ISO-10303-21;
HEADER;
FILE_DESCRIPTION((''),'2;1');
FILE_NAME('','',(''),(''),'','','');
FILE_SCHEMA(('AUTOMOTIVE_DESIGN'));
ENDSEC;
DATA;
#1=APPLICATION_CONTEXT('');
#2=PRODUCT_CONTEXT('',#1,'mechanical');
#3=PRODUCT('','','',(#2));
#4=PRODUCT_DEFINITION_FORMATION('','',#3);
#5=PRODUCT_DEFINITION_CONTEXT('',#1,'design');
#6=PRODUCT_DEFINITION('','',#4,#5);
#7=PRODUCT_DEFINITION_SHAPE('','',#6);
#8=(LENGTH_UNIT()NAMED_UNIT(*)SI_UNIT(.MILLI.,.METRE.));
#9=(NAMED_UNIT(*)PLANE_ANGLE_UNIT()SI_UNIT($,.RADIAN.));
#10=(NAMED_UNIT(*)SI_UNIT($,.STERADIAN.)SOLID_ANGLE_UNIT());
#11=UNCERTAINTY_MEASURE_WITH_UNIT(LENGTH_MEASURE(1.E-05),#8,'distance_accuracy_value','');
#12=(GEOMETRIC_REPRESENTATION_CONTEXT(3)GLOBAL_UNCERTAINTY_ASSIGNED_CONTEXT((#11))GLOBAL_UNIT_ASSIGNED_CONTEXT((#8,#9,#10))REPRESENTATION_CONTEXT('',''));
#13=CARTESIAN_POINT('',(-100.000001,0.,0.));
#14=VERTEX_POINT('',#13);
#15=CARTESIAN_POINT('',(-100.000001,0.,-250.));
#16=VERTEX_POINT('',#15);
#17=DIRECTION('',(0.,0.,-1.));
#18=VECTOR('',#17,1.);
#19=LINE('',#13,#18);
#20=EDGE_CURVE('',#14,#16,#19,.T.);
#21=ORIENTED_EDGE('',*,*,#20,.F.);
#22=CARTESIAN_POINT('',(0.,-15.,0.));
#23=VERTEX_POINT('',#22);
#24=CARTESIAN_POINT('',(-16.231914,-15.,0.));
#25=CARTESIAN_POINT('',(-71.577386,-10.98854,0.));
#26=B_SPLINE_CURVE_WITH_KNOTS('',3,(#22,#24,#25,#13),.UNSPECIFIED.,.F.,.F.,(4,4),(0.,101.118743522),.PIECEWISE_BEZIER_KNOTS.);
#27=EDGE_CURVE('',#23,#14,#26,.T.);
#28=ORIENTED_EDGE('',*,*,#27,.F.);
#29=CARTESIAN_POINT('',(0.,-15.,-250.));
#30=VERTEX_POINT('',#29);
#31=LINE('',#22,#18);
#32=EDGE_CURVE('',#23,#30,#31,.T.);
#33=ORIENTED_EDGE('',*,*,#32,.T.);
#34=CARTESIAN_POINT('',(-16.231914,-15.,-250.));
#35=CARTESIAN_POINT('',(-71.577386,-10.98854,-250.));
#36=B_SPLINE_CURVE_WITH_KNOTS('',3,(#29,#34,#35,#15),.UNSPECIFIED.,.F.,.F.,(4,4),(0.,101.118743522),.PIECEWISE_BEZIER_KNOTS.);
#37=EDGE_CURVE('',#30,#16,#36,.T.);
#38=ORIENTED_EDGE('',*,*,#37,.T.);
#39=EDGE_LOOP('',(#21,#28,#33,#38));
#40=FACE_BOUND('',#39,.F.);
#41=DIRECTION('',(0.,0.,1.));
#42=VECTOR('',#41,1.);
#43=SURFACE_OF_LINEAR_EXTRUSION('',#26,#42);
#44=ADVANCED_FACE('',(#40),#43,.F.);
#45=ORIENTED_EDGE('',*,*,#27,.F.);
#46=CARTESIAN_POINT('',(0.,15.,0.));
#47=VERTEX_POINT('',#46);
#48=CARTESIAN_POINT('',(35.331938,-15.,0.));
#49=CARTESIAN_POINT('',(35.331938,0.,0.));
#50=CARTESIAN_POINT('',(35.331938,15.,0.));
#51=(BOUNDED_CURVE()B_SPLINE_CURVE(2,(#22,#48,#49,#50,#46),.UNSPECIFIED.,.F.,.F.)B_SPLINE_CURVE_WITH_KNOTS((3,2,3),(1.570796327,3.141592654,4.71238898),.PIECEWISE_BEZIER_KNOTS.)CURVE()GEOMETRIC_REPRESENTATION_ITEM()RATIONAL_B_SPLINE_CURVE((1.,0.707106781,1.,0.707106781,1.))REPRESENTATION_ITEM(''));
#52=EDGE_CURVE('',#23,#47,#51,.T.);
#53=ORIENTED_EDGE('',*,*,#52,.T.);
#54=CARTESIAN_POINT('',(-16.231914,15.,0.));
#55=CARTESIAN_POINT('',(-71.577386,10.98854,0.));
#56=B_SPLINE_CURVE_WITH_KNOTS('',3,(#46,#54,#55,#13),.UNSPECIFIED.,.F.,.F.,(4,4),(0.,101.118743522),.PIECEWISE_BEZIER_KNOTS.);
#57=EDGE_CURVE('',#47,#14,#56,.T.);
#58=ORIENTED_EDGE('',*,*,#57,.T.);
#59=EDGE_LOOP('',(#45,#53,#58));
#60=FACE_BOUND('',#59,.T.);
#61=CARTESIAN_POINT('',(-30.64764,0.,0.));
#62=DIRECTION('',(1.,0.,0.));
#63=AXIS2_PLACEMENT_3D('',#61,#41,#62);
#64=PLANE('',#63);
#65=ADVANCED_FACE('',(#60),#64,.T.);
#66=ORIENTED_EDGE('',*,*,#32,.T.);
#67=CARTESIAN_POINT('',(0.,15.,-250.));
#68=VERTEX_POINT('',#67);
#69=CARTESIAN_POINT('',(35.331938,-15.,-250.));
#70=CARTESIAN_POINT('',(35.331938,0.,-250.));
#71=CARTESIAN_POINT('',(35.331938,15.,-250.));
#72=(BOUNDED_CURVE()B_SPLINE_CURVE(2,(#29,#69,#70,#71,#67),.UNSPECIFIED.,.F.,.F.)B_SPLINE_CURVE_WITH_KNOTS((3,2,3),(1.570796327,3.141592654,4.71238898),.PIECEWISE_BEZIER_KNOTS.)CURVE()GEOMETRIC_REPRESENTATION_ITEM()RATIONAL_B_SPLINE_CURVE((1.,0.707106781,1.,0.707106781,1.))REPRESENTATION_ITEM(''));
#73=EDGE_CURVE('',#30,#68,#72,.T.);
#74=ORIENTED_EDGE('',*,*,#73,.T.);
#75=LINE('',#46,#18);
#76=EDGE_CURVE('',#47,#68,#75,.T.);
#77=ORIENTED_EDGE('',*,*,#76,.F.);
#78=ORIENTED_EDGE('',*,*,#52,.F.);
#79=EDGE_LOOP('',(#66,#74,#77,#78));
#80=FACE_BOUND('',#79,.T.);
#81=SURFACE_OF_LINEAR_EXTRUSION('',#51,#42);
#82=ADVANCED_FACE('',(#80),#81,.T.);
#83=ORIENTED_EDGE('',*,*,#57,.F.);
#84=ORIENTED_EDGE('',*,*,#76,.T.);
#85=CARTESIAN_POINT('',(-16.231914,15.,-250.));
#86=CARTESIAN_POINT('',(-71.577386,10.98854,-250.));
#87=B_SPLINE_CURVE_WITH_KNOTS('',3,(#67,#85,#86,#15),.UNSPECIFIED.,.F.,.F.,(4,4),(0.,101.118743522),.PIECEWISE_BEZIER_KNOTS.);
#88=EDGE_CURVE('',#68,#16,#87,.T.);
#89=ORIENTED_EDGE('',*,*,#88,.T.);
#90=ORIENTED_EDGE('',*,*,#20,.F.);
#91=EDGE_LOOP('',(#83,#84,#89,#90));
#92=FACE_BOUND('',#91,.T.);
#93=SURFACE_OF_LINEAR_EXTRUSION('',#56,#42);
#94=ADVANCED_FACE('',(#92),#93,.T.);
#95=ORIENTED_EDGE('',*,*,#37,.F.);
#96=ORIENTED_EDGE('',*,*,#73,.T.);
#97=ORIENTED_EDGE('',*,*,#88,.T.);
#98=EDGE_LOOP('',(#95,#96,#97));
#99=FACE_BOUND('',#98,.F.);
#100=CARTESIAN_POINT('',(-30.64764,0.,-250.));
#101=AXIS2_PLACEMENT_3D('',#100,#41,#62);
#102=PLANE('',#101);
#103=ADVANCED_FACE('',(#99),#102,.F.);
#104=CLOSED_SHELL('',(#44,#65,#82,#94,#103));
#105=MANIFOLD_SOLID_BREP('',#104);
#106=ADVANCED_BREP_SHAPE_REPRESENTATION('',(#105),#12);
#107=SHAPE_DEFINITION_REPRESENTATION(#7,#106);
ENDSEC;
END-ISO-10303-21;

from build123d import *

# Parameters (mm, degrees)
F1_DEPTH = 250


# Not quite as in the source:
# - ends of sketch curves that miss each other by under 0.0002 mm in the source are joined


with BuildPart() as f1:
    # F0 (on Top) → F1 (new body)
    with BuildSketch(Plane.XY):
        with BuildLine():
            add(Edge.make_bspline(
                [(0, -15), (35.3319384158, -15), (35.3319384158, 0), (35.3319384158, 15), (0, 15)],
                knots=[1.5707963268, 1.5707963268, 1.5707963268, 3.1415926536, 3.1415926536, 4.7123889804, 4.7123889804, 4.7123889804], degree=2, weights=[1, 0.7071067812, 1, 0.7071067812, 1]))
            add(Edge.make_bspline(
                [(0, 15), (-16.2319140521, 15.0000000963), (-71.5773864947, 10.9885398261), (-100.0000014291, -1.909e-07)],
                knots=[0, 0, 0, 0, 101.1187435224, 101.1187435224, 101.1187435224, 101.1187435224], degree=3))
            add(Edge.make_bspline(
                [(0, -15), (-16.2319140521, -15.0000000963), (-71.5773864947, -10.9885398261), (-100.0000014291, -1.909e-07)],
                knots=[0, 0, 0, 0, 101.1187435224, 101.1187435224, 101.1187435224, 101.1187435224], degree=3))
        make_face()
    extrude(amount=-F1_DEPTH)


solid = f1.part
